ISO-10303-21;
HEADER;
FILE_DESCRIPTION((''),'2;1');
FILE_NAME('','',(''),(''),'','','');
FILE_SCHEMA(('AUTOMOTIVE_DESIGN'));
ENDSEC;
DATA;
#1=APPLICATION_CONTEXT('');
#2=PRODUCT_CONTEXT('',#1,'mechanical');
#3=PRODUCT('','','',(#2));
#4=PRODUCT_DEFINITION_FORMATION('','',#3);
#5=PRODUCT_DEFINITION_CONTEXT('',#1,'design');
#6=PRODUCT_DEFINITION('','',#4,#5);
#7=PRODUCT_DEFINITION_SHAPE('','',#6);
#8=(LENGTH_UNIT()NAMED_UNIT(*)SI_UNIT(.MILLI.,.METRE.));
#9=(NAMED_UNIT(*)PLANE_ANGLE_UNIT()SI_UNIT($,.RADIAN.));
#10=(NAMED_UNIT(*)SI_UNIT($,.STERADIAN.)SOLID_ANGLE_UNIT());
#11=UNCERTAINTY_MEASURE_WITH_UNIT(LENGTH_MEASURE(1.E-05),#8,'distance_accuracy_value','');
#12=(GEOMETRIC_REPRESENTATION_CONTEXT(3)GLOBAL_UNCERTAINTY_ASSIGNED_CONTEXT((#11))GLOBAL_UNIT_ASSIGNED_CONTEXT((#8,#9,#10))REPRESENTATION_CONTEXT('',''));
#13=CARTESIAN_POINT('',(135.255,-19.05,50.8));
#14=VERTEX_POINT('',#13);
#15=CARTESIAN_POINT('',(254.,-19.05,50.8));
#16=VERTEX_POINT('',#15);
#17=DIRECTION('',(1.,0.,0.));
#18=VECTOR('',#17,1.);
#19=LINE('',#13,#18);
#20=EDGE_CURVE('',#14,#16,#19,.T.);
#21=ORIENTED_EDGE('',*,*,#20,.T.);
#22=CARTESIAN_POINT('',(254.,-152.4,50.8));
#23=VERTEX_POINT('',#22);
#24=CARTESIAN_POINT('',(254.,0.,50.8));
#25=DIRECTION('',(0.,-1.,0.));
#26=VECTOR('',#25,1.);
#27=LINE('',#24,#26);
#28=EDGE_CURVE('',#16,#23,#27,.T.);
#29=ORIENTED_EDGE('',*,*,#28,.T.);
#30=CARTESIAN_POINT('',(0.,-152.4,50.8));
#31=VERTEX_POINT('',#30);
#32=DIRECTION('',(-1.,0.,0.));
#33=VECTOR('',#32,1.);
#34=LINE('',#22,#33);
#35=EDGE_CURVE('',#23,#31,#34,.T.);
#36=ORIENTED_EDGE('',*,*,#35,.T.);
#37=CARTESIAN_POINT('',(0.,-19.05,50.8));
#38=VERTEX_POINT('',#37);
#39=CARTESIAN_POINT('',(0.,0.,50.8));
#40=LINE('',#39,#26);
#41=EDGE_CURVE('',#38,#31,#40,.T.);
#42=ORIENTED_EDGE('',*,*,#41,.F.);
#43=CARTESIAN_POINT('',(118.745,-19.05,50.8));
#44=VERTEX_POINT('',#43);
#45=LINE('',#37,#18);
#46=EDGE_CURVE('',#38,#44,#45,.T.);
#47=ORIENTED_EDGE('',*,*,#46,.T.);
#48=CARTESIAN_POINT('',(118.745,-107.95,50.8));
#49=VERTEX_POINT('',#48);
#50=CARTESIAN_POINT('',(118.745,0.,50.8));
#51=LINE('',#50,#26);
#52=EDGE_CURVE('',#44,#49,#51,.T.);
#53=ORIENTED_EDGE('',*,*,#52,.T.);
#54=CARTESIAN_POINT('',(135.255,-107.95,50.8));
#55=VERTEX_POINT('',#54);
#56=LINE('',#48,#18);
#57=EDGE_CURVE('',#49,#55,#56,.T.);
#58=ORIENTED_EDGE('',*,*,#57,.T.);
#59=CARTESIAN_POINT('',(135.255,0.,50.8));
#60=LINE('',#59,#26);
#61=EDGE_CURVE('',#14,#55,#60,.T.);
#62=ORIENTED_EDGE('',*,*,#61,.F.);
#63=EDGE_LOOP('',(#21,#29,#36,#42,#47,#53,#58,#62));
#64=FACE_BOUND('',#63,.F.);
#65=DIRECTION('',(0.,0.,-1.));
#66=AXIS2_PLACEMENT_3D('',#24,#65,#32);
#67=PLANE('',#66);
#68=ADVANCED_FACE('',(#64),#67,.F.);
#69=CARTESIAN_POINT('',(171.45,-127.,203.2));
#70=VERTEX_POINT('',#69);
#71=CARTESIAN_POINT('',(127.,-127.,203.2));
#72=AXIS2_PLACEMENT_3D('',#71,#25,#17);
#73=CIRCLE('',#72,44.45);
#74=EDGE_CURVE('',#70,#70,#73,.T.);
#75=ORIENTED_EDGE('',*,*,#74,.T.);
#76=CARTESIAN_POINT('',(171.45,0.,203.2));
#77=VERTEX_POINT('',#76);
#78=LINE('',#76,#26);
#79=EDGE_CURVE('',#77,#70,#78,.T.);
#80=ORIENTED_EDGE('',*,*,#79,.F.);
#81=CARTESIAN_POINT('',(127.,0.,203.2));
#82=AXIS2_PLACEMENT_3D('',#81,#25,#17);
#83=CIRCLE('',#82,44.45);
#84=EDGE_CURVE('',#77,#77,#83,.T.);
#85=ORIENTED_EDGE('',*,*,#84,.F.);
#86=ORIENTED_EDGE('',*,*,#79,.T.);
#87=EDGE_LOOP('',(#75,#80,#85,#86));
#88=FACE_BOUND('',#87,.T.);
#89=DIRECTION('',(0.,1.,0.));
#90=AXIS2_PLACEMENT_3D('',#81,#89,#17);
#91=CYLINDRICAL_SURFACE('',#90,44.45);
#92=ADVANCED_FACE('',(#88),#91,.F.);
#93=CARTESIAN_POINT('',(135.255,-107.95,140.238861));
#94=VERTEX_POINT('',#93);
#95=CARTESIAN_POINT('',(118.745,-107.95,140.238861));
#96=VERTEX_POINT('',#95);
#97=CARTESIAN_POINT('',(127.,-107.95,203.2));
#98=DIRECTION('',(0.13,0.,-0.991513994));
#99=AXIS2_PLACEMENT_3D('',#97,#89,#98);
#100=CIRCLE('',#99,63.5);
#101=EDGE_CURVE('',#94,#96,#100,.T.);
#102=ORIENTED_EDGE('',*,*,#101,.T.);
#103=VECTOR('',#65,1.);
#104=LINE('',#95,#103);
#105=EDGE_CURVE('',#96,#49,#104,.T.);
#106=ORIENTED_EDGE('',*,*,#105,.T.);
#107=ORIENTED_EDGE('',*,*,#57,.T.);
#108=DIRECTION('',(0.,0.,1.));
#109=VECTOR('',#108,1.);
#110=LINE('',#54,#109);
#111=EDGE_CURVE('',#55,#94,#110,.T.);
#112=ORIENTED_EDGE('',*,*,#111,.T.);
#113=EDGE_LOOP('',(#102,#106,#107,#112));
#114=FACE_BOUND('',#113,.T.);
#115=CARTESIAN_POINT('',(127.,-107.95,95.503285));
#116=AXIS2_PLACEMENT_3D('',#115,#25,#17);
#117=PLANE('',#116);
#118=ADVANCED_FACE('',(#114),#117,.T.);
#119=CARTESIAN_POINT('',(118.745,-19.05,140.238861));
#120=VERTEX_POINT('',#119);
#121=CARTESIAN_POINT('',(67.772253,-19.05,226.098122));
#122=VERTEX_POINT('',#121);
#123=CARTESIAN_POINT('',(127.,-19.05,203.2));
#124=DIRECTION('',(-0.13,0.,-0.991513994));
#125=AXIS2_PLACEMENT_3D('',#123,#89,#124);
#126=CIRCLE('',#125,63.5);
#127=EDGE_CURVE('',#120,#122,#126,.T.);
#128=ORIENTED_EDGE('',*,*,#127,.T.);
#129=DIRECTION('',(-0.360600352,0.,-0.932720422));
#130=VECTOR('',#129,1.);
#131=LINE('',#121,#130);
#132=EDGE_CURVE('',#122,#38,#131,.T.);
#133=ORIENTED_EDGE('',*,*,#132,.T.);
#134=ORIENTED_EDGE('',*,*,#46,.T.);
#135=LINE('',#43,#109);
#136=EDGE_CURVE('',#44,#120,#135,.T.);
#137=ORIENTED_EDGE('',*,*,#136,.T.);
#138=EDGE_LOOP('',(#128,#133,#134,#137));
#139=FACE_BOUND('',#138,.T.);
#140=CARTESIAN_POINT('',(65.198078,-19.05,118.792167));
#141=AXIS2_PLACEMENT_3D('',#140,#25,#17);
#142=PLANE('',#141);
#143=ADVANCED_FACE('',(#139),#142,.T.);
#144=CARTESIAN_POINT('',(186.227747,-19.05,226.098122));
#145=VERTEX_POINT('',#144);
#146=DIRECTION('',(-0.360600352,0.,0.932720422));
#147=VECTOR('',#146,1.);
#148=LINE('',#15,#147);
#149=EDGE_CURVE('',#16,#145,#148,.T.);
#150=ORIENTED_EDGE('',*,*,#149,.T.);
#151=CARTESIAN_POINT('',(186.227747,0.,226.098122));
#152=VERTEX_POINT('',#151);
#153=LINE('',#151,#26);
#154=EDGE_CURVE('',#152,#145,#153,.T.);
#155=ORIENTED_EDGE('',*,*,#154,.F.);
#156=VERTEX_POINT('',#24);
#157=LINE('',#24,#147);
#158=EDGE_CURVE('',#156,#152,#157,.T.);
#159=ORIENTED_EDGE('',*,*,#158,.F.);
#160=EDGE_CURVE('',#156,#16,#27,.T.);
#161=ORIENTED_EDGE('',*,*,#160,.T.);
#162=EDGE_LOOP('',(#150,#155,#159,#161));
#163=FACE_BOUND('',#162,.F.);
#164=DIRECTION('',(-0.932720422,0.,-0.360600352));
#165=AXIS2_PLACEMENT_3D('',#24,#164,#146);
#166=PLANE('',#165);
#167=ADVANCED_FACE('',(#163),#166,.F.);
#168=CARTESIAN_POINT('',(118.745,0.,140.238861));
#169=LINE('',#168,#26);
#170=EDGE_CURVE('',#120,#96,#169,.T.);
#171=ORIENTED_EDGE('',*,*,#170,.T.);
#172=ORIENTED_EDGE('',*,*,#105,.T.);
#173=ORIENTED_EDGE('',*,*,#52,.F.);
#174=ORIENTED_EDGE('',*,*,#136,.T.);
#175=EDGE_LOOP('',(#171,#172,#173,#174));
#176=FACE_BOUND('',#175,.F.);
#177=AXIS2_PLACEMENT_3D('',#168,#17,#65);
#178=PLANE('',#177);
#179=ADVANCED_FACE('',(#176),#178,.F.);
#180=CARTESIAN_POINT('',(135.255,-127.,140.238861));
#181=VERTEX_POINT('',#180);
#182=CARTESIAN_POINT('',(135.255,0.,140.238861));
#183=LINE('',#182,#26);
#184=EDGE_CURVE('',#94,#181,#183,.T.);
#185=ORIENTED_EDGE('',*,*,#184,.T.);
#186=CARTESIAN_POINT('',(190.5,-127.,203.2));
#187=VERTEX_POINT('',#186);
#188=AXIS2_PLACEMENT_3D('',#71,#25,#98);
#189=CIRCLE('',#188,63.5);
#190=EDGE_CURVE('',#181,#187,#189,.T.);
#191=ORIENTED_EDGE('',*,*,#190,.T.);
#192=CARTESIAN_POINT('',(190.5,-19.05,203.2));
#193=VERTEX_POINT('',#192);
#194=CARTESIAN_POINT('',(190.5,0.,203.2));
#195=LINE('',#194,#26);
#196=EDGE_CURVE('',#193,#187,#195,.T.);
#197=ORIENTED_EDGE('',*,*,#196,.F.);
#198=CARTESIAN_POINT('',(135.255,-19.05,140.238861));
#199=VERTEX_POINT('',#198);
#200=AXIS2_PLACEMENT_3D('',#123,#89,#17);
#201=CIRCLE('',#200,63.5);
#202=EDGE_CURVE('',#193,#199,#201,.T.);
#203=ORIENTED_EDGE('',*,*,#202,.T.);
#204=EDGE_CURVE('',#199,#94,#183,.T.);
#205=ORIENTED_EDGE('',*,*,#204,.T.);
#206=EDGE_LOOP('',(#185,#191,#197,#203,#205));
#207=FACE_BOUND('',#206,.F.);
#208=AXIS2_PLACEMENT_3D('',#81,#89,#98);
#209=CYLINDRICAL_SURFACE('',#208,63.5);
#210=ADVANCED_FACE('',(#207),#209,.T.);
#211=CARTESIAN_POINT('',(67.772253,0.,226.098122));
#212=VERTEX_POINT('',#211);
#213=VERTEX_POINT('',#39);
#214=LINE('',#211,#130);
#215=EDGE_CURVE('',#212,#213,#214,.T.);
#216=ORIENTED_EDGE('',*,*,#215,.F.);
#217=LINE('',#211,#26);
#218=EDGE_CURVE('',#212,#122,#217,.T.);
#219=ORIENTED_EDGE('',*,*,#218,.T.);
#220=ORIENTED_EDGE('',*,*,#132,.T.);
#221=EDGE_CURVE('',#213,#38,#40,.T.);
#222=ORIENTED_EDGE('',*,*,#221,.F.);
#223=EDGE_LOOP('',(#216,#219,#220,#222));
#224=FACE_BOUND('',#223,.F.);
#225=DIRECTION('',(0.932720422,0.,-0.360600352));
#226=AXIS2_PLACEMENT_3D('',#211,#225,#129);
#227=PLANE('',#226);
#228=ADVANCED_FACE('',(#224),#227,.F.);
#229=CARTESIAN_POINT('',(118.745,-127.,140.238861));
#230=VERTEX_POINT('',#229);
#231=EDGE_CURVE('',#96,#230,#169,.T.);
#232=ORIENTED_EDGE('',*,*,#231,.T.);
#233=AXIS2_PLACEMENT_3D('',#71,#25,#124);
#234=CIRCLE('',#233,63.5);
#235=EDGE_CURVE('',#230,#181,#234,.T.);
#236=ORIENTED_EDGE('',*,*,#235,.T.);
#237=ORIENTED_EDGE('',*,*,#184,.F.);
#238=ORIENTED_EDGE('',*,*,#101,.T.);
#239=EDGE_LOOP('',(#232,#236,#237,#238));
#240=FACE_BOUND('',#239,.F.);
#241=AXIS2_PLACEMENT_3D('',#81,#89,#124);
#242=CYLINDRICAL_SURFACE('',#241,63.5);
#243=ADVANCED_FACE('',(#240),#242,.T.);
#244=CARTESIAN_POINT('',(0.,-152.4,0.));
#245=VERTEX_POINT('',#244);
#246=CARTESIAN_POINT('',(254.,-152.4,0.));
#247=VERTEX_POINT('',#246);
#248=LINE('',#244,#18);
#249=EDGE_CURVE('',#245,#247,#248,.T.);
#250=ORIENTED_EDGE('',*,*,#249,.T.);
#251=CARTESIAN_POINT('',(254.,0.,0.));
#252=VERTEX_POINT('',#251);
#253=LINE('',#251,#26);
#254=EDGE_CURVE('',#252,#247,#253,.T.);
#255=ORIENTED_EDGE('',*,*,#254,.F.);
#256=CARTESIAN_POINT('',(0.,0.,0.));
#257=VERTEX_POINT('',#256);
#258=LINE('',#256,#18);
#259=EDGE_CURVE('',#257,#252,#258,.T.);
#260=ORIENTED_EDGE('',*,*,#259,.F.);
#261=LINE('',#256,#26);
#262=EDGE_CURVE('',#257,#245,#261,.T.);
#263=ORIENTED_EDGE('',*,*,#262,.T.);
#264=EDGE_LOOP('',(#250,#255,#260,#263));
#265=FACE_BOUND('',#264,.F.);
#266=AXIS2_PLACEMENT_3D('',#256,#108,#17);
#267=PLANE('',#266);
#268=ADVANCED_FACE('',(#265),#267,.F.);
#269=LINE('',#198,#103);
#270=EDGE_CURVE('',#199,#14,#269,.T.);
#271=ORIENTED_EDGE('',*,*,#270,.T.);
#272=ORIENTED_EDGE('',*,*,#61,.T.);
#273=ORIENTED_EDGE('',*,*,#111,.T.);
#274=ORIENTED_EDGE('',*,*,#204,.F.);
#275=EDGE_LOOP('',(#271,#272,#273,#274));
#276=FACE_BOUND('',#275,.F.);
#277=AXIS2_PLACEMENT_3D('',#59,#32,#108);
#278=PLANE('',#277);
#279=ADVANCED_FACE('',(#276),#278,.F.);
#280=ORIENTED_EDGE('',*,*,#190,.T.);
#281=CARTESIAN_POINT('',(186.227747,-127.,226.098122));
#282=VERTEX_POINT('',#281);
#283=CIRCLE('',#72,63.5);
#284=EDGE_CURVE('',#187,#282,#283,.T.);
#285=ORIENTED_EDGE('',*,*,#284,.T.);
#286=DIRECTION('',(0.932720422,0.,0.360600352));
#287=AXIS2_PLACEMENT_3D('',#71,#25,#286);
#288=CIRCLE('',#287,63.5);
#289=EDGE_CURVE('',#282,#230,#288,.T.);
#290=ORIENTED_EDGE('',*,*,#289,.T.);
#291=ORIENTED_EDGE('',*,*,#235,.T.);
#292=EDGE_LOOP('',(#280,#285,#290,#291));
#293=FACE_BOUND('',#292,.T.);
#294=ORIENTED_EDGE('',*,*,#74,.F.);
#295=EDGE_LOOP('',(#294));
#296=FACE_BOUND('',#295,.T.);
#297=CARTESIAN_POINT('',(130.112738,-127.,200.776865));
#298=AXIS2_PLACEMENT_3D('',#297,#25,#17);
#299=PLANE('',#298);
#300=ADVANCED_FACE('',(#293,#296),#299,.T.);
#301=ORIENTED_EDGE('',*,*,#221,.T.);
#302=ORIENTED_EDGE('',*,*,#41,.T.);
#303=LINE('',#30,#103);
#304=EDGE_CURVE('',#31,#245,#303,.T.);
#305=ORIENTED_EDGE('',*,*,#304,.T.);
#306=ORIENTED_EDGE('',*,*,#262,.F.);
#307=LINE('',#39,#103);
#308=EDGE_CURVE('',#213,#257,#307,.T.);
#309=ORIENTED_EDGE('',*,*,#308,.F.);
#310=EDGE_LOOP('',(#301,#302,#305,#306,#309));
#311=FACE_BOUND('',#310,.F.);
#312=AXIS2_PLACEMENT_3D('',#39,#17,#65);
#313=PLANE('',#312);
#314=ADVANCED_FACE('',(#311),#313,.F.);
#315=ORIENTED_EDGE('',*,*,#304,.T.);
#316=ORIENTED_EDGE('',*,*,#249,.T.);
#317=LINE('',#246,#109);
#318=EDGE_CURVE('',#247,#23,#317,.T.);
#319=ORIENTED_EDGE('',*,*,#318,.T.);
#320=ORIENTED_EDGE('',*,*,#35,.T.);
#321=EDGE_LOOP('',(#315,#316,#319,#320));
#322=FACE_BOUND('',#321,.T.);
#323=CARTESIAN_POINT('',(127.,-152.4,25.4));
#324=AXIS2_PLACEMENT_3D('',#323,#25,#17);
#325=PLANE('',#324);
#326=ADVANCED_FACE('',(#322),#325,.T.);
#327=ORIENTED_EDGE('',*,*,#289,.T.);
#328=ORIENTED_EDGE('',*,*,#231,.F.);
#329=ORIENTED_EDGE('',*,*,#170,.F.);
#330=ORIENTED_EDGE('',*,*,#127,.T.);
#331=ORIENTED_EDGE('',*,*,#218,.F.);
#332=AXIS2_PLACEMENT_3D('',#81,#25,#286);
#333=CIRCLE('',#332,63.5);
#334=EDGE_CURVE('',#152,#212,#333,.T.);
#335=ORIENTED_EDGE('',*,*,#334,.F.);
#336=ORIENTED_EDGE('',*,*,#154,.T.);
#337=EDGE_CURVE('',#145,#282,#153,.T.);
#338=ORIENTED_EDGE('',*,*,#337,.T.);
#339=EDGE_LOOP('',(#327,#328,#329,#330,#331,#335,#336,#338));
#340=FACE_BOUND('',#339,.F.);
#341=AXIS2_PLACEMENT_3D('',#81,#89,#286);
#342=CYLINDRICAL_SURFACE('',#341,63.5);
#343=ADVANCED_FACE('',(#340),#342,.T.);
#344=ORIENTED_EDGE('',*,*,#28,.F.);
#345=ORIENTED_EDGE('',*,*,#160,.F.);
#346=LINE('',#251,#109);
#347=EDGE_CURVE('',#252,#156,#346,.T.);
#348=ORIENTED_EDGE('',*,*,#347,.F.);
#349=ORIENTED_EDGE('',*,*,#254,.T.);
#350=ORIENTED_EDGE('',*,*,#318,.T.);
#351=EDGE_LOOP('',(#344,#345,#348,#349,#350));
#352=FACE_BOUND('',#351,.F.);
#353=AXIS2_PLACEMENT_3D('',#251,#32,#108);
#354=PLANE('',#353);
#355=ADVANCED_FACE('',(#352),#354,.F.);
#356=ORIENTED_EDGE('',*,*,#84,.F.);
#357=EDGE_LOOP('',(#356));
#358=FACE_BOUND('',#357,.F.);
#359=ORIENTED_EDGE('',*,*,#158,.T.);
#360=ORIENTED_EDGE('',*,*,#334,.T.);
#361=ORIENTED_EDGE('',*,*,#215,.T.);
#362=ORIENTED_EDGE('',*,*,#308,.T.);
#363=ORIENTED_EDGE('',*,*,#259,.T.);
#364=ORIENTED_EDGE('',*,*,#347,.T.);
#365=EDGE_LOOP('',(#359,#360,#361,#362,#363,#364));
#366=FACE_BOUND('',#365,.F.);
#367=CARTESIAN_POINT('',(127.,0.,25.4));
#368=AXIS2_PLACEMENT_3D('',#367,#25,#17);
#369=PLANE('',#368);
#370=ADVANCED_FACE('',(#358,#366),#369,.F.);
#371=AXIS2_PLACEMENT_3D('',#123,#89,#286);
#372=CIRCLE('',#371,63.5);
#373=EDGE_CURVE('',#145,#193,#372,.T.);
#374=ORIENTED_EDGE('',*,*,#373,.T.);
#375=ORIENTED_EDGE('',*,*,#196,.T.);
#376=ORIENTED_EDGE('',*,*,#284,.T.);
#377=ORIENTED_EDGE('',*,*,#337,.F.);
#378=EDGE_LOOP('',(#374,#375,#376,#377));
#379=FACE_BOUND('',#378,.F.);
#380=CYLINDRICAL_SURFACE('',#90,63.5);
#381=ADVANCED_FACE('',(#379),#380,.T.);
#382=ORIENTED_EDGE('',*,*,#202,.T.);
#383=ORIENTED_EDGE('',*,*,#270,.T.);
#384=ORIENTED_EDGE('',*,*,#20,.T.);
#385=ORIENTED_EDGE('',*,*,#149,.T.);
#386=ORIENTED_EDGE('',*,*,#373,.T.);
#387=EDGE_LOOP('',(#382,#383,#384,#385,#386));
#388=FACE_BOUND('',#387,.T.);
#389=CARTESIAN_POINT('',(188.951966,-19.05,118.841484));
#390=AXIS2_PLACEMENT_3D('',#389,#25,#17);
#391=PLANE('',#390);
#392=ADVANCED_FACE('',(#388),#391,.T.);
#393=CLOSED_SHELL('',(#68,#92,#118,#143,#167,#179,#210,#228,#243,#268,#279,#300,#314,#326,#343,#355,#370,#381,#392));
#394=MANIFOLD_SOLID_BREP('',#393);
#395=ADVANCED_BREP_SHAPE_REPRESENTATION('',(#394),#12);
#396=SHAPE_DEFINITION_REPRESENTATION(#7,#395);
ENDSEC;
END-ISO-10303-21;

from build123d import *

# Parameters (mm, degrees)
F2_DEPTH = 107.95
F3_DEPTH = 19.05
F4_DEPTH = 19.05
F1_R     = 44.45
F5_DEPTH = 127
F6_DEPTH = 152.4


# Not quite as in the source:
# - a variable given as a bare number and used for a length is read in inches; the dataset says mm whatever the document's units were


with BuildPart() as f2:
    # F1 (on Front) → F2 (new body)
    with BuildSketch(Plane.XZ):
        with BuildLine():
            Line((118.745, 140.2388613905), (118.745, 50.8))
            Line((118.745, 50.8), (135.255, 50.8))
            Line((135.255, 50.8), (135.255, 140.2388613905))
            ThreePointArc((135.255, 140.2388613905), (127, 139.7), (118.745, 140.2388613905))
        make_face()
    extrude(amount=F2_DEPTH)

    # F1 (on Front) → F3 (join)
    with BuildSketch(Plane.XZ):
        with BuildLine():
            Line((135.255, 50.8), (254, 50.8))
            Line((254, 50.8), (186.2277468166, 226.0981223472))
            ThreePointArc((186.2277468166, 226.0981223472), (189.4228000127, 214.8466320699), (190.5, 203.2))
            ThreePointArc((190.5, 203.2), (174.7307160013, 161.3188735825), (135.255, 140.2388613905))
            Line((135.255, 140.2388613905), (135.255, 50.8))
        make_face()
    extrude(amount=F3_DEPTH)

    # F1 (on Front) → F4 (join)
    with BuildSketch(Plane.XZ):
        with BuildLine():
            Line((67.7722531834, 226.0981223472), (0, 50.8))
            Line((0, 50.8), (118.745, 50.8))
            Line((118.745, 50.8), (118.745, 140.2388613905))
            ThreePointArc((118.745, 140.2388613905), (72.3974959138, 170.7836993549), (67.7722531834, 226.0981223472))
        make_face()
    extrude(amount=F4_DEPTH)

    # F1 (on Front) → F5 (join)
    with BuildSketch(Plane.XZ):
        with BuildLine():
            ThreePointArc((186.2277468166, 226.0981223472), (127, 266.7), (67.7722531834, 226.0981223472))
            ThreePointArc((67.7722531834, 226.0981223472), (72.3974959138, 170.7836993549), (118.745, 140.2388613905))
            ThreePointArc((118.745, 140.2388613905), (127, 139.7), (135.255, 140.2388613905))
            ThreePointArc((135.255, 140.2388613905), (174.7307160013, 161.3188735825), (190.5, 203.2))
            ThreePointArc((190.5, 203.2), (189.4228000127, 214.8466320699), (186.2277468166, 226.0981223472))
        make_face()
        with Locations((127, 203.2)):
            Circle(F1_R, mode=Mode.SUBTRACT)
    extrude(amount=F5_DEPTH)

    # F1 (on Front) → F6 (join)
    with BuildSketch(Plane.XZ):
        Polygon((0, 50.8), (0, 0), (254, 0), (254, 50.8), (135.255, 50.8), (118.745, 50.8), align=None)
    extrude(amount=F6_DEPTH)


solid = f2.part
